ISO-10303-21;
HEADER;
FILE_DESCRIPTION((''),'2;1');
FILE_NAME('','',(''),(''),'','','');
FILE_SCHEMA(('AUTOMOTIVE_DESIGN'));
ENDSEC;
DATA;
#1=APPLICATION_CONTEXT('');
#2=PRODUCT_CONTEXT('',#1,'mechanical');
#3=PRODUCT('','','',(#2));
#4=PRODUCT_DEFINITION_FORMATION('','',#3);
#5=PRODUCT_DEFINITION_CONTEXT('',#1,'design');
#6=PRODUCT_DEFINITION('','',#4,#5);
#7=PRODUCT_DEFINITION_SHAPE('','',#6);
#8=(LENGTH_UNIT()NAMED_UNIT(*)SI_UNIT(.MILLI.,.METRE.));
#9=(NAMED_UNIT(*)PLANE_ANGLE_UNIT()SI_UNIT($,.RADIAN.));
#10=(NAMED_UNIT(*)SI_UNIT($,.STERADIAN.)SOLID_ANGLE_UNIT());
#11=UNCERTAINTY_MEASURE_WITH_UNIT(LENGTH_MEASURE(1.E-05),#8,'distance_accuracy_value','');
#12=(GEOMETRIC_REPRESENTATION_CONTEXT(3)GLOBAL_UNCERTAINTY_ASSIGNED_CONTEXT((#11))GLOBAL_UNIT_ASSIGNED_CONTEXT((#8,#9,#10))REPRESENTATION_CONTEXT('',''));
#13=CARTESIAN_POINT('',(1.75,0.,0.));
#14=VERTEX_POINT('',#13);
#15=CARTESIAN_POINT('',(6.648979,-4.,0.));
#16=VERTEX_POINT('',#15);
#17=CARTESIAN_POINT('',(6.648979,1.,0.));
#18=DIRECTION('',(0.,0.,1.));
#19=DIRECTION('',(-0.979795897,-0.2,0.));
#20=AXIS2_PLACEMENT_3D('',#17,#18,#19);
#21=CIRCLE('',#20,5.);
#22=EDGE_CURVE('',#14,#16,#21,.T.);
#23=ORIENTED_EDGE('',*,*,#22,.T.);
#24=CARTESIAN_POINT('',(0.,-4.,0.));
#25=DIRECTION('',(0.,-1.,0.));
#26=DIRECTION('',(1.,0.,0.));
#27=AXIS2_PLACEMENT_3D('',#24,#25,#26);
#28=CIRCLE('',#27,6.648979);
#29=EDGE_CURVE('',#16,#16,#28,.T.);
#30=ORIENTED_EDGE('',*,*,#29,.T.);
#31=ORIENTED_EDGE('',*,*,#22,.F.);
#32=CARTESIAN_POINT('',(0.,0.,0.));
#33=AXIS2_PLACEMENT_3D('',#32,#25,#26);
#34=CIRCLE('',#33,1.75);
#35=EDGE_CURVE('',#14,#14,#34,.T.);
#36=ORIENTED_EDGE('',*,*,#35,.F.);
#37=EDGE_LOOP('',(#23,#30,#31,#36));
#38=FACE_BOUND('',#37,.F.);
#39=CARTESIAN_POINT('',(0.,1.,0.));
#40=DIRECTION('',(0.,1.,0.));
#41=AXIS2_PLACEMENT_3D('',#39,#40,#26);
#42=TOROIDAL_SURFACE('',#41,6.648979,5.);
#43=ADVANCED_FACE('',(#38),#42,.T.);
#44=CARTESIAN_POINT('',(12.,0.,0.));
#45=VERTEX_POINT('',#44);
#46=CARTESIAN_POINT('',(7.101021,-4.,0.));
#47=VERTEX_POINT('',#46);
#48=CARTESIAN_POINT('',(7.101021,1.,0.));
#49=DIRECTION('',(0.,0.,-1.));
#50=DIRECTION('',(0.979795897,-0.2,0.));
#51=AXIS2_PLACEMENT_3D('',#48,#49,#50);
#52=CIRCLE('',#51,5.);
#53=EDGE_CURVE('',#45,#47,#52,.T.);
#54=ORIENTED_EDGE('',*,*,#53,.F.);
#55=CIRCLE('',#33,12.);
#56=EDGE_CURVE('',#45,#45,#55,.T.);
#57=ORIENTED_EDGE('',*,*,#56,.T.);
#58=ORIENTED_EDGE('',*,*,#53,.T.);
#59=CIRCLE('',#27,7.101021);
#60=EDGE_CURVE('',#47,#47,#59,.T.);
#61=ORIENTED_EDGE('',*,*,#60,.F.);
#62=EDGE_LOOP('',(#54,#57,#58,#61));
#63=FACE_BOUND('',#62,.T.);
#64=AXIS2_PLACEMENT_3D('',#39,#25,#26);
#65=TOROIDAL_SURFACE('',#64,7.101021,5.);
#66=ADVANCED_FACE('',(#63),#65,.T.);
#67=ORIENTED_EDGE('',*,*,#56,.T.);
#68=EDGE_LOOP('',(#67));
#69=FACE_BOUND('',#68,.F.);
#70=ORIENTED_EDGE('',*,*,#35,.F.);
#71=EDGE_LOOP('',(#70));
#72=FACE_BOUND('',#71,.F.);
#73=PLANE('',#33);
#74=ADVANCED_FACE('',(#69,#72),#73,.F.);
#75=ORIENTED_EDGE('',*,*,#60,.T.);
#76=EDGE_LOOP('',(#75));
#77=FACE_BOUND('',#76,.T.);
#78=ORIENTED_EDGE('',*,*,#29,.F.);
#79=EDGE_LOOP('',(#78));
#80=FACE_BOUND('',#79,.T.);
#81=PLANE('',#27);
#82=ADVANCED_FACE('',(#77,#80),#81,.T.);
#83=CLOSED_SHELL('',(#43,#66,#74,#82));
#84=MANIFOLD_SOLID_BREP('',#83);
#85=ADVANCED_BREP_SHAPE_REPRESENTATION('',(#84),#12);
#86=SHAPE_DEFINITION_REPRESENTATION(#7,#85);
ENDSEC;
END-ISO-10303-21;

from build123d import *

# Parameters (mm, degrees)
F0_R     = 12
F0_R_2   = 1.75
F1_DEPTH = 4


# Not quite as in the source:
# - a fillet or chamfer that OpenCascade refuses, or shapes differently, is made with other operations: its cross-section is extruded or revolved along the edge and cut away or added


with BuildPart() as f1:
    # F0 (on Front) → F1 (new body)
    with BuildSketch(Plane.XZ):
        Circle(F0_R)
        Circle(F0_R_2, mode=Mode.SUBTRACT)
    extrude(amount=F1_DEPTH)

    # F2: fillet of radius 5 on 2 edges, made by hand

    # F2_s1 → F2_t2 (revolve, cut)
    with BuildSketch(Plane.XY):
        with BuildLine():
            ThreePointArc((12, 0), (10.2632981746, -2.8729833462), (7.1010205144, -4))
            Line((7.1010205144, -4), (12, -4))
            Line((12, -4), (12, 0))
        make_face()
    revolve(axis=Axis((0, -4, 0), (0, -1, 0)), mode=Mode.SUBTRACT)

    # F2_s3 → F2_t4 (revolve, cut)
    with BuildSketch(Plane.XY):
        with BuildLine():
            ThreePointArc((1.75, 0), (3.4867018254, -2.8729833462), (6.6489794856, -4))
            Line((6.6489794856, -4), (1.75, -4))
            Line((1.75, -4), (1.75, 0))
        make_face()
    revolve(axis=Axis((0, -4, 0), (0, -1, 0)), mode=Mode.SUBTRACT)


solid = f1.part
